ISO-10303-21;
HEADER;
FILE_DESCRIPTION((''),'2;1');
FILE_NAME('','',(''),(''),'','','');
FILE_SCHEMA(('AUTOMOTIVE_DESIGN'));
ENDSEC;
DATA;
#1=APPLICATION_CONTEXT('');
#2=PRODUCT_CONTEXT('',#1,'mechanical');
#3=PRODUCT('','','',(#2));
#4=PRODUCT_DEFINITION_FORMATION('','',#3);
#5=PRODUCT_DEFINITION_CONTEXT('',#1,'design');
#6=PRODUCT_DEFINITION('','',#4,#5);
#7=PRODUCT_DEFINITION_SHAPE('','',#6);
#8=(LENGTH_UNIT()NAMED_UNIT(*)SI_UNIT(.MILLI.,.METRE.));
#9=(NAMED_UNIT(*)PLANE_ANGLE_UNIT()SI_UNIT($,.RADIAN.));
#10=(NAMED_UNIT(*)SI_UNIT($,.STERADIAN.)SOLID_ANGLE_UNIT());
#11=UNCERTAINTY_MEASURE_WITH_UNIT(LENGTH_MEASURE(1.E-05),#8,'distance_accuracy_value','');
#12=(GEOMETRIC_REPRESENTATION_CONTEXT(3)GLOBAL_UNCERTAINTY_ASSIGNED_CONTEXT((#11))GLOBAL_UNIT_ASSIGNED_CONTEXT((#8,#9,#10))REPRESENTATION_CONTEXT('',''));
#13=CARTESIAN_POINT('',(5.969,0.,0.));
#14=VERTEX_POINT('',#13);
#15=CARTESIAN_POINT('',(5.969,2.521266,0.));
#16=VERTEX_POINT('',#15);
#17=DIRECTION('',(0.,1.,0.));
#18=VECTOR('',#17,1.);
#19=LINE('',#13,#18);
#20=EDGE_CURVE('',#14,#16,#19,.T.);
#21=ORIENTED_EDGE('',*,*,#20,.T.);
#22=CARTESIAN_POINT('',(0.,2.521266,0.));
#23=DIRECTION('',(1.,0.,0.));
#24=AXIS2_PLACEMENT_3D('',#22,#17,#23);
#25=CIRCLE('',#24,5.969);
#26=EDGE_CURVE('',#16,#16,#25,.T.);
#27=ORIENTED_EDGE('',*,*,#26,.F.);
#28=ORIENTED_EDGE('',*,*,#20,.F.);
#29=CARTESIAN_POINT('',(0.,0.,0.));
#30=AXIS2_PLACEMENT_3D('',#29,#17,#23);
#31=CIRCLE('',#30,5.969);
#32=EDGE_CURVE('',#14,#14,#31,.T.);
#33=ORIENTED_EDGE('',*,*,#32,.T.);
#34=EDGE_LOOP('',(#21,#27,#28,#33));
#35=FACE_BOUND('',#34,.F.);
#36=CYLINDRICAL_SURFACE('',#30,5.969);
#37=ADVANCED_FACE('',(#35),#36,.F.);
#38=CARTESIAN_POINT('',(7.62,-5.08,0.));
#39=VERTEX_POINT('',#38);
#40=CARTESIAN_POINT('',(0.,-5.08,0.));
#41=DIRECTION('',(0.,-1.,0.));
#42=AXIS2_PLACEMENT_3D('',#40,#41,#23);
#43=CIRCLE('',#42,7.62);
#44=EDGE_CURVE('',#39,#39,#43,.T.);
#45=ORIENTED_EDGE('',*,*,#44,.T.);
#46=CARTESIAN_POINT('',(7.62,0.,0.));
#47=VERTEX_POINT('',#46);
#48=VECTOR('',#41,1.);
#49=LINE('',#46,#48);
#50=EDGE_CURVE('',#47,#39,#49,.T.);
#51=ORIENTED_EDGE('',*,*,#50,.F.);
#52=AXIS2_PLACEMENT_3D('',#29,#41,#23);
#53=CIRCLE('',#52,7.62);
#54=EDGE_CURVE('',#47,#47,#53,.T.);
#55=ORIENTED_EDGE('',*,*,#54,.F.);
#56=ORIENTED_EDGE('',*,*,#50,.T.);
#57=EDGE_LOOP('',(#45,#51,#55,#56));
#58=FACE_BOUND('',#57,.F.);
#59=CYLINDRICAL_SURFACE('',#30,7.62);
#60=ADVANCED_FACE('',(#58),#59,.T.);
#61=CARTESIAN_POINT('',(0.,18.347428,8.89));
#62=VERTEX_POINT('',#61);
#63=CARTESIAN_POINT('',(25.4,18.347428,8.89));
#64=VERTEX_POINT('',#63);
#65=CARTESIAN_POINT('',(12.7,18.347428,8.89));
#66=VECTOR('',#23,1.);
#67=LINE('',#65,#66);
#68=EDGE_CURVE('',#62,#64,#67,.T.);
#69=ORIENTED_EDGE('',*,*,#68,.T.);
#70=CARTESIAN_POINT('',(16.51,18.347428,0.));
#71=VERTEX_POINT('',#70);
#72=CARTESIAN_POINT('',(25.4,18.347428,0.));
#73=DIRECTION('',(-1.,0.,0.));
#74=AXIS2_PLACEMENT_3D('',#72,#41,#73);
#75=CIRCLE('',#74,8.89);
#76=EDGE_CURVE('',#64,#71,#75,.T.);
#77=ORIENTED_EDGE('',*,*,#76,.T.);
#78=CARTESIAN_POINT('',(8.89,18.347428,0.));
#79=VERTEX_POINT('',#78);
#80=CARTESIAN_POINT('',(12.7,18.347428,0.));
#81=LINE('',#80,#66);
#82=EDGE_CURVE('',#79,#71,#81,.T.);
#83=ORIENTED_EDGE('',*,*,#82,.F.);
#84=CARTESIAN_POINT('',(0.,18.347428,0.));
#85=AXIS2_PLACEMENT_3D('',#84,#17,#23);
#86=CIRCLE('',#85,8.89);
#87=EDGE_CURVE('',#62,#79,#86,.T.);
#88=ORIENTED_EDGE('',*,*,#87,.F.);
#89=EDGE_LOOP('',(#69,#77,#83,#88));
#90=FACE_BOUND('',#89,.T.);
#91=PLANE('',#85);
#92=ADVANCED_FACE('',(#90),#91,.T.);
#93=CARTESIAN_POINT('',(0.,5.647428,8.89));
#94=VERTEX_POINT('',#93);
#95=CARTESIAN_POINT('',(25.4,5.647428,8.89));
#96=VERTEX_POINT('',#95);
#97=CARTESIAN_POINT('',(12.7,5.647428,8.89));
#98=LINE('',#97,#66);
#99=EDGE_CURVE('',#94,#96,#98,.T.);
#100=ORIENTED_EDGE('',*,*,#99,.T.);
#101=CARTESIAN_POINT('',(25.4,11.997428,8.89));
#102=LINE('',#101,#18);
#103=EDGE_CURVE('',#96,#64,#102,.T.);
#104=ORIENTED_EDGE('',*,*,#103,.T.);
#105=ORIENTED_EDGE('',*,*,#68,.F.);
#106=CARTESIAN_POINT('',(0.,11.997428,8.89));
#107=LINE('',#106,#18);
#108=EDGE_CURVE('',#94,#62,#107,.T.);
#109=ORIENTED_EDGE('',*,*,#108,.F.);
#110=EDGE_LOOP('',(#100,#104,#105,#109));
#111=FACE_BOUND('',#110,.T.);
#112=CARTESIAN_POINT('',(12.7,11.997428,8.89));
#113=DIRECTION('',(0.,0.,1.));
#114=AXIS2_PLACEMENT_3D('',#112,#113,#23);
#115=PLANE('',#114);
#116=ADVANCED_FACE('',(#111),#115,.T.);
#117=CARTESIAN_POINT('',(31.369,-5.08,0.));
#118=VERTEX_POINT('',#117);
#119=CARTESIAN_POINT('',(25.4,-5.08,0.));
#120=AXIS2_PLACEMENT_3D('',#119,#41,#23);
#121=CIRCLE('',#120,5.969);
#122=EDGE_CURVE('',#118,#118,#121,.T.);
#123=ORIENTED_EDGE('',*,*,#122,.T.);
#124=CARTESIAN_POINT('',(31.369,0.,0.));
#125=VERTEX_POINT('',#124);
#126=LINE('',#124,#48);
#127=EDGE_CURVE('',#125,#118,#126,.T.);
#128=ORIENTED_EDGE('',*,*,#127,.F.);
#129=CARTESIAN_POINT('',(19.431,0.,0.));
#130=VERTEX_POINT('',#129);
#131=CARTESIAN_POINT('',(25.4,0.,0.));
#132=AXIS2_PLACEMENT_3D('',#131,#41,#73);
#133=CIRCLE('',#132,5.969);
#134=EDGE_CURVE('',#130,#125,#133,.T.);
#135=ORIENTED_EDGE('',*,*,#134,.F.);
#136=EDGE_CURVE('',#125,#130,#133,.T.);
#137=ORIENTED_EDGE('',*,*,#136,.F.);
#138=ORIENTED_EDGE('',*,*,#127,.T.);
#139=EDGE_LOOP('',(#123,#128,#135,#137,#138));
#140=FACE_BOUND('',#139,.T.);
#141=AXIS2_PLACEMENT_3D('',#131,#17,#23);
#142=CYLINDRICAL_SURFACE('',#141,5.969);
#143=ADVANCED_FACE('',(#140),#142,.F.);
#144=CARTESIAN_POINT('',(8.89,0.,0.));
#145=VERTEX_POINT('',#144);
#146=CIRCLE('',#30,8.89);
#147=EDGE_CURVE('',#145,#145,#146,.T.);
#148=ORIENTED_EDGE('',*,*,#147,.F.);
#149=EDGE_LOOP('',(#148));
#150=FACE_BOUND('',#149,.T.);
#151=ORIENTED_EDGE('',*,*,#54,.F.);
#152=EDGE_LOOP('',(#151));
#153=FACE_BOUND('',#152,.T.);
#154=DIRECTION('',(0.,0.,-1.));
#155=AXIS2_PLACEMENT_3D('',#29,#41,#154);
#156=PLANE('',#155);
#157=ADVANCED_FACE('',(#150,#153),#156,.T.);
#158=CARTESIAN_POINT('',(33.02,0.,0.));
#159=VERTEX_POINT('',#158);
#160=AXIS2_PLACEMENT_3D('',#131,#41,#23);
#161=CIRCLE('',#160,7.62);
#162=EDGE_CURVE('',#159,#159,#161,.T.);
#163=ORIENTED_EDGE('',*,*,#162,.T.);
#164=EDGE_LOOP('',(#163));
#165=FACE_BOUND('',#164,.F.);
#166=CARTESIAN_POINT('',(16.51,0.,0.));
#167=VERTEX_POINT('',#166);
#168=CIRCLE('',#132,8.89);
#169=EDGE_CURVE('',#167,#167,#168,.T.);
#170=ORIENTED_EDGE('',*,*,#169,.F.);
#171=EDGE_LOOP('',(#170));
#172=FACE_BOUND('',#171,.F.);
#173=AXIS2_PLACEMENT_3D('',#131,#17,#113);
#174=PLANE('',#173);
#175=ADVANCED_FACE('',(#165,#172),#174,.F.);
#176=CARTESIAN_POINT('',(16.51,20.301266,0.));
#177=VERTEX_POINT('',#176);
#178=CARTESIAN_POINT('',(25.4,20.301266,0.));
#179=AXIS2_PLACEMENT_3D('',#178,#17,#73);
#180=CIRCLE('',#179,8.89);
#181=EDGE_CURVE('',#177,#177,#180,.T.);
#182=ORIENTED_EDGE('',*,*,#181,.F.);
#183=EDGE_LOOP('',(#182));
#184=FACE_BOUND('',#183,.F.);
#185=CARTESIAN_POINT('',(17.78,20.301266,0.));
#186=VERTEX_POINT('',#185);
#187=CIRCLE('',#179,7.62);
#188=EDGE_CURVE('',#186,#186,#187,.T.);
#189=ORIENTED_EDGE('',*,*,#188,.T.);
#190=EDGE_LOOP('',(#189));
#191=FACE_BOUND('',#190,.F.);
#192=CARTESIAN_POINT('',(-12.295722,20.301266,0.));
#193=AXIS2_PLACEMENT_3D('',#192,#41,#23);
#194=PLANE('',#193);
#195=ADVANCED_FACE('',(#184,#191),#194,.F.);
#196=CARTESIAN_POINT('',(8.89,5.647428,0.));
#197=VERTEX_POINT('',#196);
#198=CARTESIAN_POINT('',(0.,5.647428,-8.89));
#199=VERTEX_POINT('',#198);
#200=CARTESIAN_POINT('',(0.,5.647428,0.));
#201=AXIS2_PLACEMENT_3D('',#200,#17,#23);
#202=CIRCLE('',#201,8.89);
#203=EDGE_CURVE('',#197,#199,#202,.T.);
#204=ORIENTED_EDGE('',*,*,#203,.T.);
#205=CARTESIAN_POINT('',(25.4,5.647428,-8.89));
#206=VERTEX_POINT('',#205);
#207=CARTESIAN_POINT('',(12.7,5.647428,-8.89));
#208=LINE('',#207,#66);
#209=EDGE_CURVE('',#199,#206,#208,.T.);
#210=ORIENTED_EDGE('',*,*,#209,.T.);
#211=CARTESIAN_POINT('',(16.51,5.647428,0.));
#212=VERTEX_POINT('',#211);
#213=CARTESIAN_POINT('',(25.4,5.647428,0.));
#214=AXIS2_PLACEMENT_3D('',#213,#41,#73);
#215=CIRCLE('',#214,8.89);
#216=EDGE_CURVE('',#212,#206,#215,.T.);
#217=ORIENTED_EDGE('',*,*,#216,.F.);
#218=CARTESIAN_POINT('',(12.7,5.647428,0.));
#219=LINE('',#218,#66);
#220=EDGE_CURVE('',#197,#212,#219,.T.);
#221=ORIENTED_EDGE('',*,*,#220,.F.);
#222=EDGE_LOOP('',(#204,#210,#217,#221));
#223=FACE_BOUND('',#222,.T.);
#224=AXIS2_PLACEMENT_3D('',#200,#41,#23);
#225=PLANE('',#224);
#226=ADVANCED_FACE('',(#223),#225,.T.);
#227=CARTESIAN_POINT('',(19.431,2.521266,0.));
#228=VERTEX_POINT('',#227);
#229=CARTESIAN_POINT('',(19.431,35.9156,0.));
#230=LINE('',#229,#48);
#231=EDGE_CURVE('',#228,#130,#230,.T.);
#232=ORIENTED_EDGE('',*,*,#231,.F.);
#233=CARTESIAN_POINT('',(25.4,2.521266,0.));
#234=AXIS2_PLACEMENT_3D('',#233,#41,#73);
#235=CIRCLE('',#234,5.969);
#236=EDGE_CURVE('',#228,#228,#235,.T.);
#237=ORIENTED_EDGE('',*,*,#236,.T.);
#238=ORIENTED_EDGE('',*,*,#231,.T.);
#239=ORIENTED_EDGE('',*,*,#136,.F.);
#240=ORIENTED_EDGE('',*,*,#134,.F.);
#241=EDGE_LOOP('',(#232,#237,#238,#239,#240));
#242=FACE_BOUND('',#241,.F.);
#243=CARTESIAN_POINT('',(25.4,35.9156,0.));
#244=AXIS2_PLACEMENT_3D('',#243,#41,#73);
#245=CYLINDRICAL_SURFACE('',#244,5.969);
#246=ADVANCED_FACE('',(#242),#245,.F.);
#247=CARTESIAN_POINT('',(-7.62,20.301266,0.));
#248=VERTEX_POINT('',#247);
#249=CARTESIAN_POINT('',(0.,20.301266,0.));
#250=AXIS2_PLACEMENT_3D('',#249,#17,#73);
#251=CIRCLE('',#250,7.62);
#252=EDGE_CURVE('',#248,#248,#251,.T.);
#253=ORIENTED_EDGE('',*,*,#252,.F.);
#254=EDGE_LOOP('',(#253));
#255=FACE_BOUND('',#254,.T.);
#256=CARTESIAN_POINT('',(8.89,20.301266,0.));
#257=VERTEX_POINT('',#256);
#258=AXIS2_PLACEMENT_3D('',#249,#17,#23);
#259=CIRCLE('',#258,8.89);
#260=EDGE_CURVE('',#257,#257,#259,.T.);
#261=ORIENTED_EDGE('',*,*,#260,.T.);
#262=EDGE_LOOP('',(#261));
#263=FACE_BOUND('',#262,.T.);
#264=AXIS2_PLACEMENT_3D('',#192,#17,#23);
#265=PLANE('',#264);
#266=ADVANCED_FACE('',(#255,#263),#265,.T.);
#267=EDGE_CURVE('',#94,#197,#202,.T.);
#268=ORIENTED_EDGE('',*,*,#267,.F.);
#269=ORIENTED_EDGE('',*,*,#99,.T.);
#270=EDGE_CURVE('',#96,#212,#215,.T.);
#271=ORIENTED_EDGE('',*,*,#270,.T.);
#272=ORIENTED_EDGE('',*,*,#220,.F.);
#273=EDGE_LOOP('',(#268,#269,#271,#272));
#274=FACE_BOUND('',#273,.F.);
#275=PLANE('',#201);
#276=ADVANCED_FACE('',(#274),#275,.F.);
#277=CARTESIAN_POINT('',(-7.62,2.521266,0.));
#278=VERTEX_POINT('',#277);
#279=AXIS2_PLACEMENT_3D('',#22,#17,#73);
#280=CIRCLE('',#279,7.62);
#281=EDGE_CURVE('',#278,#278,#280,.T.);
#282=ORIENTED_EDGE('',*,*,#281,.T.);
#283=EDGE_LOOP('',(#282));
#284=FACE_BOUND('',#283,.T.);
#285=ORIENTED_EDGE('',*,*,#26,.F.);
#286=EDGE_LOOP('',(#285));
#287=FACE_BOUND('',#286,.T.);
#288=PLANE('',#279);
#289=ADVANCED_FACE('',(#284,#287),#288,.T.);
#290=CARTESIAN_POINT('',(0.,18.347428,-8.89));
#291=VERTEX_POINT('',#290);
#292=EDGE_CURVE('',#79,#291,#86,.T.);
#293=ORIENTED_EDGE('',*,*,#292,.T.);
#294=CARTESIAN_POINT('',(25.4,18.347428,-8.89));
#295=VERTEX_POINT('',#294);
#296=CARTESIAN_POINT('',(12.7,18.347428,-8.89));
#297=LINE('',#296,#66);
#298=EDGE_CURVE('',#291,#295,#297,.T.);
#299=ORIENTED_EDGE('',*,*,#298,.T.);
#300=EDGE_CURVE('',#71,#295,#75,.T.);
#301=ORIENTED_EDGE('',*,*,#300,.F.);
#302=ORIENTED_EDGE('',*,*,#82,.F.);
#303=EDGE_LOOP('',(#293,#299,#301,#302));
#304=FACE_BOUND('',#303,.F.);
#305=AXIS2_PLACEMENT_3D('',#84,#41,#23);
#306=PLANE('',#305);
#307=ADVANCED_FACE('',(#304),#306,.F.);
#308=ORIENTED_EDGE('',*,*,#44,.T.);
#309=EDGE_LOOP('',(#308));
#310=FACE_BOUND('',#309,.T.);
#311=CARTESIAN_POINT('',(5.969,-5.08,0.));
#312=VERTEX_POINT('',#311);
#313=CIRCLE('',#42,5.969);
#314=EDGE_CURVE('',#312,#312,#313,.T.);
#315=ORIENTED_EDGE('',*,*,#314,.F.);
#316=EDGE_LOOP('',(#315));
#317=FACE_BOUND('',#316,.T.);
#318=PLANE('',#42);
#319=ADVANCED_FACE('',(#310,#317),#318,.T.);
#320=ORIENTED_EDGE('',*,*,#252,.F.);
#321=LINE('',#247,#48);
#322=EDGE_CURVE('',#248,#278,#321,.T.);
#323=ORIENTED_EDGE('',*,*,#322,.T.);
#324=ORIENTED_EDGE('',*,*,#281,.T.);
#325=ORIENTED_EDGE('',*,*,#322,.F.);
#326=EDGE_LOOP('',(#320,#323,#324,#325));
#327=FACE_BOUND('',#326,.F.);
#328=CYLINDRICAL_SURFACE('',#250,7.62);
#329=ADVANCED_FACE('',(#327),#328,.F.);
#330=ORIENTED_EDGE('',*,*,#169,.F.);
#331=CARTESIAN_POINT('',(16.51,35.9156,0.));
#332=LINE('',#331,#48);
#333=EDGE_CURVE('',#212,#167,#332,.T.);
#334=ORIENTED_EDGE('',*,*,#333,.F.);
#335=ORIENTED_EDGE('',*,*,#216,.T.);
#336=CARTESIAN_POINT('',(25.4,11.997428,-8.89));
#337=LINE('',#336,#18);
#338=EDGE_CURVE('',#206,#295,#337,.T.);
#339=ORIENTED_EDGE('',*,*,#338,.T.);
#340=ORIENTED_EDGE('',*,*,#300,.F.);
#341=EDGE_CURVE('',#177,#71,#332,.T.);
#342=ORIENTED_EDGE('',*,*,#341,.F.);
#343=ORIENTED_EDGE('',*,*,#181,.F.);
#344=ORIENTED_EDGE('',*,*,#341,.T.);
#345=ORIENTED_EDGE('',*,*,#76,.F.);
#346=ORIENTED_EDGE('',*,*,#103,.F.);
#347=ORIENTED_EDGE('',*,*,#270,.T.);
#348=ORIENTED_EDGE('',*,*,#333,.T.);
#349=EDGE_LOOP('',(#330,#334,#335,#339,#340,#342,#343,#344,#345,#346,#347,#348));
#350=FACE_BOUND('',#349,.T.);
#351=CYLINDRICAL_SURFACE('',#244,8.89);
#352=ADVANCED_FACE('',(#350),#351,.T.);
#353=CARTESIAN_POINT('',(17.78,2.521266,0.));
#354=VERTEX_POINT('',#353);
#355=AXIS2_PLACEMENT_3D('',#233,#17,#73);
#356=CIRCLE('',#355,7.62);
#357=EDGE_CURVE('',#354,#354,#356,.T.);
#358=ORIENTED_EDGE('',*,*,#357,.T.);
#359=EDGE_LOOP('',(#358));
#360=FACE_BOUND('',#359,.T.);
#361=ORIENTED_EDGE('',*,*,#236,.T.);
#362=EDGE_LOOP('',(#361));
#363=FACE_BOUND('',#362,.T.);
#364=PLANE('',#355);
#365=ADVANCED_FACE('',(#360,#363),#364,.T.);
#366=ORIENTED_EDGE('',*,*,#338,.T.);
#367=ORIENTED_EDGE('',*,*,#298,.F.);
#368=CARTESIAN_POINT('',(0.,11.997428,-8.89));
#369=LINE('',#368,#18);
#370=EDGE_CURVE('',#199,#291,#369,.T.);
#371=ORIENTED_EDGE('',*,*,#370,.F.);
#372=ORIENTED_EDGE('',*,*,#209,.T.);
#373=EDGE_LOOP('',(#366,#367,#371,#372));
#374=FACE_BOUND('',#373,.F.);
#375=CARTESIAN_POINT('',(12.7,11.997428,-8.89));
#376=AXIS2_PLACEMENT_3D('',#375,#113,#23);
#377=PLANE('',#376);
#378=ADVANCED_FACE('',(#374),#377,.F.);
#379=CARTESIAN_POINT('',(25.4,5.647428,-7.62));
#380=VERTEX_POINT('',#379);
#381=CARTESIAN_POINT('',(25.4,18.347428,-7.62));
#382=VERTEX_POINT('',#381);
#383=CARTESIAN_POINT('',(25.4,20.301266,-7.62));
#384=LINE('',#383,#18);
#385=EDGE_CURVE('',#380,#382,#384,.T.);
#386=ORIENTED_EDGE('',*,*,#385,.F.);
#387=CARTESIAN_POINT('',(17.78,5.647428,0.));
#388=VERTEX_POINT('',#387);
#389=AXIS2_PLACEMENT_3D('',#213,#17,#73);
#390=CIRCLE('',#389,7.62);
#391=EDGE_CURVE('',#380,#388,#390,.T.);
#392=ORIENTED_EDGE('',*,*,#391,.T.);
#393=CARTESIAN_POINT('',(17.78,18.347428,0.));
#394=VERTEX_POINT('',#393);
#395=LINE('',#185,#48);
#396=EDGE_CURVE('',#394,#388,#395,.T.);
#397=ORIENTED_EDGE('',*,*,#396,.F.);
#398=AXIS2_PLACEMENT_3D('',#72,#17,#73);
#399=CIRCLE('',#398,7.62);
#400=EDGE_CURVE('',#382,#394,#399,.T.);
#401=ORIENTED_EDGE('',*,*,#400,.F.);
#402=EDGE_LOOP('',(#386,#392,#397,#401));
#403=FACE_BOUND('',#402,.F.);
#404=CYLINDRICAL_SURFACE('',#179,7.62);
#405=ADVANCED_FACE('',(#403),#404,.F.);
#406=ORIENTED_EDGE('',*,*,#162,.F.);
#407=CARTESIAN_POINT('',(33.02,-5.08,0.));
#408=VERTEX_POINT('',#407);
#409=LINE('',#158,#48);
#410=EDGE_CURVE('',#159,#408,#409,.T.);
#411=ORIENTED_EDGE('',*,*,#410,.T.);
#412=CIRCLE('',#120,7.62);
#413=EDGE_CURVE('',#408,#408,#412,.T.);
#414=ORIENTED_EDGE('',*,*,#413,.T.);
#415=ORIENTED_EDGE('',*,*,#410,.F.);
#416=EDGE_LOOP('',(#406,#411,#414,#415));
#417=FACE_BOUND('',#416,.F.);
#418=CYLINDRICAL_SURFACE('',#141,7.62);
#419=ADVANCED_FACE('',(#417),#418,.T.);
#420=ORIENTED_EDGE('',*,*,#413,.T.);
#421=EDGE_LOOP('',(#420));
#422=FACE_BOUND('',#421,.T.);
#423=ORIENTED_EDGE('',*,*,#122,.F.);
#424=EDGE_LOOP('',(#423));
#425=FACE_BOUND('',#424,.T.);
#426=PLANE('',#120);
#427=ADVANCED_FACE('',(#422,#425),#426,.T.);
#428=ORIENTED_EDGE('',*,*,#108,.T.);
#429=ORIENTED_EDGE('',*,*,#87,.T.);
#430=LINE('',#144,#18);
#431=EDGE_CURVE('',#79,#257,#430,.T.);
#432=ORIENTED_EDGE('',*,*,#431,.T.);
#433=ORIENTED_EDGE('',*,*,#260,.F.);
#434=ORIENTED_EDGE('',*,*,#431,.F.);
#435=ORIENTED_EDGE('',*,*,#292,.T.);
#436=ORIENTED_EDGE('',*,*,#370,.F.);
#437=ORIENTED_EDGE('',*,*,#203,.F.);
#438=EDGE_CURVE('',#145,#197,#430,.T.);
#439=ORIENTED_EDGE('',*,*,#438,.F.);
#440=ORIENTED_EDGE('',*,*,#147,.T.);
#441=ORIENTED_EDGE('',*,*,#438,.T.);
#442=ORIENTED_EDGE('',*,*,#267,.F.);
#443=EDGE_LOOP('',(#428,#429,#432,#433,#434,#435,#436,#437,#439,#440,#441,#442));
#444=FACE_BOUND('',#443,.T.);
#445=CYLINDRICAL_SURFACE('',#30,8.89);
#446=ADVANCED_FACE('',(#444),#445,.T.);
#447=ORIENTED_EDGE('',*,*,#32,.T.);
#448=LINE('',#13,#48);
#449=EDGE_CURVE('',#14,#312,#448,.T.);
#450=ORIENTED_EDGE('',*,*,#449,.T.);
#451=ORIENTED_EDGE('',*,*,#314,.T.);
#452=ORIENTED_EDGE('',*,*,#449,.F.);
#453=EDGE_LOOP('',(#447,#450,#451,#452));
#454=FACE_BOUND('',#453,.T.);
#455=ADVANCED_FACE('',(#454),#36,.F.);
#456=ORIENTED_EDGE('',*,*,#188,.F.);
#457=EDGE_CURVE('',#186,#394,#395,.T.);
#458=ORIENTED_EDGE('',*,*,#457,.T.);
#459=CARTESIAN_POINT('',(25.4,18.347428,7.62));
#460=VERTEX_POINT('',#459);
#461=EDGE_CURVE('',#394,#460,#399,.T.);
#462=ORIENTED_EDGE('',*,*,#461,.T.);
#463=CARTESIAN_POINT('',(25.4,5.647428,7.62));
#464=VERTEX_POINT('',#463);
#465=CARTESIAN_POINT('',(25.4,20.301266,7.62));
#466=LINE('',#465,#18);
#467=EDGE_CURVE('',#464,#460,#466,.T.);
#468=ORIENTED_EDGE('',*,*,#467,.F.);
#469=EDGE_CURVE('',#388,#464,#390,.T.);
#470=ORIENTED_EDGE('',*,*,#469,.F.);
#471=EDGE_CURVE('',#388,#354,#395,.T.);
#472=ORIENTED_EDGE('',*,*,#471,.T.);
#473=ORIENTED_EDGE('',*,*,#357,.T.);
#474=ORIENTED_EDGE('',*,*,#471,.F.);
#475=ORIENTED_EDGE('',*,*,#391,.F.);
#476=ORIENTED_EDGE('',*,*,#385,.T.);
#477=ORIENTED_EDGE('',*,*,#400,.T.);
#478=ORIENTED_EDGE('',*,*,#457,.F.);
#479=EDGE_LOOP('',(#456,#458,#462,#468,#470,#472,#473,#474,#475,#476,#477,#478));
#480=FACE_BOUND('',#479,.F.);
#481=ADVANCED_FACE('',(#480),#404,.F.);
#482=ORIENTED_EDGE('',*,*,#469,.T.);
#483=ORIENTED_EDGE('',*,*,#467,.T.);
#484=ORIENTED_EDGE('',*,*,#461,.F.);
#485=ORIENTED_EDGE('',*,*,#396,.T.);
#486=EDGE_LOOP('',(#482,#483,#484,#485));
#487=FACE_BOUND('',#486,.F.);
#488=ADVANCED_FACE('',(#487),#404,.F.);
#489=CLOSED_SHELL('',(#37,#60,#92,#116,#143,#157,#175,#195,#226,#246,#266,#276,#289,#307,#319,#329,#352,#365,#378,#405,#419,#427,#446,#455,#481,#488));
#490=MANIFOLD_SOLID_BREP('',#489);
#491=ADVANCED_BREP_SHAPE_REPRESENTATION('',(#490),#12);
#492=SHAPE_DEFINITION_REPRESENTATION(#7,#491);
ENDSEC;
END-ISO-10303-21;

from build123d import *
from build123d import SkipClean  # not in build123d's __all__

# Parameters (mm, degrees)
F1_R           = 8.89
F1_R_2         = 5.969
F3_R           = 7.62
F3_R_2         = 5.969
F4_R           = 7.62
F4_R_2         = 5.969
F5_DEPTH       = 5.08
F6_DEPTH       = 25.4
F6_DEPTH_BACK  = 25.4
F7_R           = 7.62
F8_R           = 7.62
F9_DEPTH       = 17.78
F0_W           = 25.4
F0_H           = 12.7
F10_DEPTH      = 8.89
F10_DEPTH_BACK = 8.89
F11_DEPTH      = 17.78


# Not quite as in the source:
# - a feature of the source that left no trace in its solid (it failed there, or was rolled back) is left out


with BuildPart() as f2:
    # F2: sweep along a path in F0
    with BuildLine(Plane.XY) as f2_path:
        Line((0, 0), (0, 35.9156))
        ThreePointArc((0, 35.9156), (12.7, 48.6156), (25.4, 35.9156))
        Line((25.4, 35.9156), (25.4, 0))
    # F1 (on Front) → F2 (sweep)
    with BuildSketch(Plane.XZ):
        Circle(F1_R)
        Circle(F1_R_2, mode=Mode.SUBTRACT)
    sweep(path=f2_path.line)

    # F3 (on face) + F4 (on face) → F5 (join)
    with BuildSketch(Plane.XZ):
        Circle(F3_R)
        Circle(F3_R_2, mode=Mode.SUBTRACT)
    with BuildSketch(Plane.XZ):
        with Locations((25.4, 0)):
            Circle(F4_R)
        with Locations((25.4, 0)):
            Circle(F4_R_2, mode=Mode.SUBTRACT)
    with SkipClean():  # cleaning this boolean's faces spoils the solid; the shape is the same uncleaned
        extrude(amount=F5_DEPTH)

    # F0 (on Top) → F6 (cut, two sides)
    with BuildSketch(Plane.XY) as f6_sk:
        with BuildLine():
            Line((-12.2957220301, 20.301265642), (0, 20.301265642))
            Line((0, 20.301265642), (0, 35.9156))
            ThreePointArc((0, 35.9156), (3.7197438789, 44.8958561211), (12.7, 48.6156))
            ThreePointArc((12.7, 48.6156), (21.6802561211, 44.8958561211), (25.4, 35.9156))
            Line((25.4, 35.9156), (25.4, 20.301265642))
            Line((25.4, 20.301265642), (40.2239970863, 20.301265642))
            Line((40.2239970863, 20.301265642), (40.2239970863, 60.9702691436))
            Line((40.2239970863, 60.9702691436), (-12.2957220301, 60.9702691436))
            Line((-12.2957220301, 60.9702691436), (-12.2957220301, 20.301265642))
        make_face()
        with BuildLine():
            Line((0, 35.9156), (0, 20.301265642))
            Line((0, 20.301265642), (12.7, 20.301265642))
            Line((12.7, 20.301265642), (12.7, 48.6156))
            ThreePointArc((12.7, 48.6156), (3.7197438789, 44.8958561211), (0, 35.9156))
        make_face()
        with BuildLine():
            Line((12.7, 20.301265642), (25.4, 20.301265642))
            Line((25.4, 20.301265642), (25.4, 35.9156))
            ThreePointArc((25.4, 35.9156), (21.6802561211, 44.8958561211), (12.7, 48.6156))
            Line((12.7, 48.6156), (12.7, 20.301265642))
        make_face()
    extrude(amount=-F6_DEPTH, mode=Mode.SUBTRACT)
    extrude(f6_sk.sketch, amount=F6_DEPTH_BACK, mode=Mode.SUBTRACT)

    # F7 (on face) + F8 (on face) → F9 (cut)
    with BuildSketch(Plane(origin=(0, 20.301265642, 0), x_dir=(-1, 0, 0), z_dir=(0, 1, 0))):
        with Locations((-25.4, 0)):
            Circle(F7_R)
    with BuildSketch(Plane(origin=(0, 20.301265642, 0), x_dir=(-1, 0, 0), z_dir=(0, 1, 0))):
        Circle(F8_R)
    extrude(amount=-F9_DEPTH, mode=Mode.SUBTRACT)

    # F0 (on Top) → F10 (join, two sides)
    with BuildSketch(Plane.XY) as f10_sk:
        with Locations((12.7, 11.9974283338)):
            Rectangle(F0_W, F0_H)
    extrude(amount=F10_DEPTH)
    extrude(f10_sk.sketch, amount=-F10_DEPTH_BACK)

    # F7 (on face) + F8 (on face) → F11 (cut)
    with BuildSketch(Plane(origin=(0, 20.301265642, 0), x_dir=(-1, 0, 0), z_dir=(0, 1, 0))):
        with Locations((-25.4, 0)):
            Circle(F7_R)
    with BuildSketch(Plane(origin=(0, 20.301265642, 0), x_dir=(-1, 0, 0), z_dir=(0, 1, 0))):
        Circle(F8_R)
    extrude(amount=-F11_DEPTH, mode=Mode.SUBTRACT)


solid = f2.part
